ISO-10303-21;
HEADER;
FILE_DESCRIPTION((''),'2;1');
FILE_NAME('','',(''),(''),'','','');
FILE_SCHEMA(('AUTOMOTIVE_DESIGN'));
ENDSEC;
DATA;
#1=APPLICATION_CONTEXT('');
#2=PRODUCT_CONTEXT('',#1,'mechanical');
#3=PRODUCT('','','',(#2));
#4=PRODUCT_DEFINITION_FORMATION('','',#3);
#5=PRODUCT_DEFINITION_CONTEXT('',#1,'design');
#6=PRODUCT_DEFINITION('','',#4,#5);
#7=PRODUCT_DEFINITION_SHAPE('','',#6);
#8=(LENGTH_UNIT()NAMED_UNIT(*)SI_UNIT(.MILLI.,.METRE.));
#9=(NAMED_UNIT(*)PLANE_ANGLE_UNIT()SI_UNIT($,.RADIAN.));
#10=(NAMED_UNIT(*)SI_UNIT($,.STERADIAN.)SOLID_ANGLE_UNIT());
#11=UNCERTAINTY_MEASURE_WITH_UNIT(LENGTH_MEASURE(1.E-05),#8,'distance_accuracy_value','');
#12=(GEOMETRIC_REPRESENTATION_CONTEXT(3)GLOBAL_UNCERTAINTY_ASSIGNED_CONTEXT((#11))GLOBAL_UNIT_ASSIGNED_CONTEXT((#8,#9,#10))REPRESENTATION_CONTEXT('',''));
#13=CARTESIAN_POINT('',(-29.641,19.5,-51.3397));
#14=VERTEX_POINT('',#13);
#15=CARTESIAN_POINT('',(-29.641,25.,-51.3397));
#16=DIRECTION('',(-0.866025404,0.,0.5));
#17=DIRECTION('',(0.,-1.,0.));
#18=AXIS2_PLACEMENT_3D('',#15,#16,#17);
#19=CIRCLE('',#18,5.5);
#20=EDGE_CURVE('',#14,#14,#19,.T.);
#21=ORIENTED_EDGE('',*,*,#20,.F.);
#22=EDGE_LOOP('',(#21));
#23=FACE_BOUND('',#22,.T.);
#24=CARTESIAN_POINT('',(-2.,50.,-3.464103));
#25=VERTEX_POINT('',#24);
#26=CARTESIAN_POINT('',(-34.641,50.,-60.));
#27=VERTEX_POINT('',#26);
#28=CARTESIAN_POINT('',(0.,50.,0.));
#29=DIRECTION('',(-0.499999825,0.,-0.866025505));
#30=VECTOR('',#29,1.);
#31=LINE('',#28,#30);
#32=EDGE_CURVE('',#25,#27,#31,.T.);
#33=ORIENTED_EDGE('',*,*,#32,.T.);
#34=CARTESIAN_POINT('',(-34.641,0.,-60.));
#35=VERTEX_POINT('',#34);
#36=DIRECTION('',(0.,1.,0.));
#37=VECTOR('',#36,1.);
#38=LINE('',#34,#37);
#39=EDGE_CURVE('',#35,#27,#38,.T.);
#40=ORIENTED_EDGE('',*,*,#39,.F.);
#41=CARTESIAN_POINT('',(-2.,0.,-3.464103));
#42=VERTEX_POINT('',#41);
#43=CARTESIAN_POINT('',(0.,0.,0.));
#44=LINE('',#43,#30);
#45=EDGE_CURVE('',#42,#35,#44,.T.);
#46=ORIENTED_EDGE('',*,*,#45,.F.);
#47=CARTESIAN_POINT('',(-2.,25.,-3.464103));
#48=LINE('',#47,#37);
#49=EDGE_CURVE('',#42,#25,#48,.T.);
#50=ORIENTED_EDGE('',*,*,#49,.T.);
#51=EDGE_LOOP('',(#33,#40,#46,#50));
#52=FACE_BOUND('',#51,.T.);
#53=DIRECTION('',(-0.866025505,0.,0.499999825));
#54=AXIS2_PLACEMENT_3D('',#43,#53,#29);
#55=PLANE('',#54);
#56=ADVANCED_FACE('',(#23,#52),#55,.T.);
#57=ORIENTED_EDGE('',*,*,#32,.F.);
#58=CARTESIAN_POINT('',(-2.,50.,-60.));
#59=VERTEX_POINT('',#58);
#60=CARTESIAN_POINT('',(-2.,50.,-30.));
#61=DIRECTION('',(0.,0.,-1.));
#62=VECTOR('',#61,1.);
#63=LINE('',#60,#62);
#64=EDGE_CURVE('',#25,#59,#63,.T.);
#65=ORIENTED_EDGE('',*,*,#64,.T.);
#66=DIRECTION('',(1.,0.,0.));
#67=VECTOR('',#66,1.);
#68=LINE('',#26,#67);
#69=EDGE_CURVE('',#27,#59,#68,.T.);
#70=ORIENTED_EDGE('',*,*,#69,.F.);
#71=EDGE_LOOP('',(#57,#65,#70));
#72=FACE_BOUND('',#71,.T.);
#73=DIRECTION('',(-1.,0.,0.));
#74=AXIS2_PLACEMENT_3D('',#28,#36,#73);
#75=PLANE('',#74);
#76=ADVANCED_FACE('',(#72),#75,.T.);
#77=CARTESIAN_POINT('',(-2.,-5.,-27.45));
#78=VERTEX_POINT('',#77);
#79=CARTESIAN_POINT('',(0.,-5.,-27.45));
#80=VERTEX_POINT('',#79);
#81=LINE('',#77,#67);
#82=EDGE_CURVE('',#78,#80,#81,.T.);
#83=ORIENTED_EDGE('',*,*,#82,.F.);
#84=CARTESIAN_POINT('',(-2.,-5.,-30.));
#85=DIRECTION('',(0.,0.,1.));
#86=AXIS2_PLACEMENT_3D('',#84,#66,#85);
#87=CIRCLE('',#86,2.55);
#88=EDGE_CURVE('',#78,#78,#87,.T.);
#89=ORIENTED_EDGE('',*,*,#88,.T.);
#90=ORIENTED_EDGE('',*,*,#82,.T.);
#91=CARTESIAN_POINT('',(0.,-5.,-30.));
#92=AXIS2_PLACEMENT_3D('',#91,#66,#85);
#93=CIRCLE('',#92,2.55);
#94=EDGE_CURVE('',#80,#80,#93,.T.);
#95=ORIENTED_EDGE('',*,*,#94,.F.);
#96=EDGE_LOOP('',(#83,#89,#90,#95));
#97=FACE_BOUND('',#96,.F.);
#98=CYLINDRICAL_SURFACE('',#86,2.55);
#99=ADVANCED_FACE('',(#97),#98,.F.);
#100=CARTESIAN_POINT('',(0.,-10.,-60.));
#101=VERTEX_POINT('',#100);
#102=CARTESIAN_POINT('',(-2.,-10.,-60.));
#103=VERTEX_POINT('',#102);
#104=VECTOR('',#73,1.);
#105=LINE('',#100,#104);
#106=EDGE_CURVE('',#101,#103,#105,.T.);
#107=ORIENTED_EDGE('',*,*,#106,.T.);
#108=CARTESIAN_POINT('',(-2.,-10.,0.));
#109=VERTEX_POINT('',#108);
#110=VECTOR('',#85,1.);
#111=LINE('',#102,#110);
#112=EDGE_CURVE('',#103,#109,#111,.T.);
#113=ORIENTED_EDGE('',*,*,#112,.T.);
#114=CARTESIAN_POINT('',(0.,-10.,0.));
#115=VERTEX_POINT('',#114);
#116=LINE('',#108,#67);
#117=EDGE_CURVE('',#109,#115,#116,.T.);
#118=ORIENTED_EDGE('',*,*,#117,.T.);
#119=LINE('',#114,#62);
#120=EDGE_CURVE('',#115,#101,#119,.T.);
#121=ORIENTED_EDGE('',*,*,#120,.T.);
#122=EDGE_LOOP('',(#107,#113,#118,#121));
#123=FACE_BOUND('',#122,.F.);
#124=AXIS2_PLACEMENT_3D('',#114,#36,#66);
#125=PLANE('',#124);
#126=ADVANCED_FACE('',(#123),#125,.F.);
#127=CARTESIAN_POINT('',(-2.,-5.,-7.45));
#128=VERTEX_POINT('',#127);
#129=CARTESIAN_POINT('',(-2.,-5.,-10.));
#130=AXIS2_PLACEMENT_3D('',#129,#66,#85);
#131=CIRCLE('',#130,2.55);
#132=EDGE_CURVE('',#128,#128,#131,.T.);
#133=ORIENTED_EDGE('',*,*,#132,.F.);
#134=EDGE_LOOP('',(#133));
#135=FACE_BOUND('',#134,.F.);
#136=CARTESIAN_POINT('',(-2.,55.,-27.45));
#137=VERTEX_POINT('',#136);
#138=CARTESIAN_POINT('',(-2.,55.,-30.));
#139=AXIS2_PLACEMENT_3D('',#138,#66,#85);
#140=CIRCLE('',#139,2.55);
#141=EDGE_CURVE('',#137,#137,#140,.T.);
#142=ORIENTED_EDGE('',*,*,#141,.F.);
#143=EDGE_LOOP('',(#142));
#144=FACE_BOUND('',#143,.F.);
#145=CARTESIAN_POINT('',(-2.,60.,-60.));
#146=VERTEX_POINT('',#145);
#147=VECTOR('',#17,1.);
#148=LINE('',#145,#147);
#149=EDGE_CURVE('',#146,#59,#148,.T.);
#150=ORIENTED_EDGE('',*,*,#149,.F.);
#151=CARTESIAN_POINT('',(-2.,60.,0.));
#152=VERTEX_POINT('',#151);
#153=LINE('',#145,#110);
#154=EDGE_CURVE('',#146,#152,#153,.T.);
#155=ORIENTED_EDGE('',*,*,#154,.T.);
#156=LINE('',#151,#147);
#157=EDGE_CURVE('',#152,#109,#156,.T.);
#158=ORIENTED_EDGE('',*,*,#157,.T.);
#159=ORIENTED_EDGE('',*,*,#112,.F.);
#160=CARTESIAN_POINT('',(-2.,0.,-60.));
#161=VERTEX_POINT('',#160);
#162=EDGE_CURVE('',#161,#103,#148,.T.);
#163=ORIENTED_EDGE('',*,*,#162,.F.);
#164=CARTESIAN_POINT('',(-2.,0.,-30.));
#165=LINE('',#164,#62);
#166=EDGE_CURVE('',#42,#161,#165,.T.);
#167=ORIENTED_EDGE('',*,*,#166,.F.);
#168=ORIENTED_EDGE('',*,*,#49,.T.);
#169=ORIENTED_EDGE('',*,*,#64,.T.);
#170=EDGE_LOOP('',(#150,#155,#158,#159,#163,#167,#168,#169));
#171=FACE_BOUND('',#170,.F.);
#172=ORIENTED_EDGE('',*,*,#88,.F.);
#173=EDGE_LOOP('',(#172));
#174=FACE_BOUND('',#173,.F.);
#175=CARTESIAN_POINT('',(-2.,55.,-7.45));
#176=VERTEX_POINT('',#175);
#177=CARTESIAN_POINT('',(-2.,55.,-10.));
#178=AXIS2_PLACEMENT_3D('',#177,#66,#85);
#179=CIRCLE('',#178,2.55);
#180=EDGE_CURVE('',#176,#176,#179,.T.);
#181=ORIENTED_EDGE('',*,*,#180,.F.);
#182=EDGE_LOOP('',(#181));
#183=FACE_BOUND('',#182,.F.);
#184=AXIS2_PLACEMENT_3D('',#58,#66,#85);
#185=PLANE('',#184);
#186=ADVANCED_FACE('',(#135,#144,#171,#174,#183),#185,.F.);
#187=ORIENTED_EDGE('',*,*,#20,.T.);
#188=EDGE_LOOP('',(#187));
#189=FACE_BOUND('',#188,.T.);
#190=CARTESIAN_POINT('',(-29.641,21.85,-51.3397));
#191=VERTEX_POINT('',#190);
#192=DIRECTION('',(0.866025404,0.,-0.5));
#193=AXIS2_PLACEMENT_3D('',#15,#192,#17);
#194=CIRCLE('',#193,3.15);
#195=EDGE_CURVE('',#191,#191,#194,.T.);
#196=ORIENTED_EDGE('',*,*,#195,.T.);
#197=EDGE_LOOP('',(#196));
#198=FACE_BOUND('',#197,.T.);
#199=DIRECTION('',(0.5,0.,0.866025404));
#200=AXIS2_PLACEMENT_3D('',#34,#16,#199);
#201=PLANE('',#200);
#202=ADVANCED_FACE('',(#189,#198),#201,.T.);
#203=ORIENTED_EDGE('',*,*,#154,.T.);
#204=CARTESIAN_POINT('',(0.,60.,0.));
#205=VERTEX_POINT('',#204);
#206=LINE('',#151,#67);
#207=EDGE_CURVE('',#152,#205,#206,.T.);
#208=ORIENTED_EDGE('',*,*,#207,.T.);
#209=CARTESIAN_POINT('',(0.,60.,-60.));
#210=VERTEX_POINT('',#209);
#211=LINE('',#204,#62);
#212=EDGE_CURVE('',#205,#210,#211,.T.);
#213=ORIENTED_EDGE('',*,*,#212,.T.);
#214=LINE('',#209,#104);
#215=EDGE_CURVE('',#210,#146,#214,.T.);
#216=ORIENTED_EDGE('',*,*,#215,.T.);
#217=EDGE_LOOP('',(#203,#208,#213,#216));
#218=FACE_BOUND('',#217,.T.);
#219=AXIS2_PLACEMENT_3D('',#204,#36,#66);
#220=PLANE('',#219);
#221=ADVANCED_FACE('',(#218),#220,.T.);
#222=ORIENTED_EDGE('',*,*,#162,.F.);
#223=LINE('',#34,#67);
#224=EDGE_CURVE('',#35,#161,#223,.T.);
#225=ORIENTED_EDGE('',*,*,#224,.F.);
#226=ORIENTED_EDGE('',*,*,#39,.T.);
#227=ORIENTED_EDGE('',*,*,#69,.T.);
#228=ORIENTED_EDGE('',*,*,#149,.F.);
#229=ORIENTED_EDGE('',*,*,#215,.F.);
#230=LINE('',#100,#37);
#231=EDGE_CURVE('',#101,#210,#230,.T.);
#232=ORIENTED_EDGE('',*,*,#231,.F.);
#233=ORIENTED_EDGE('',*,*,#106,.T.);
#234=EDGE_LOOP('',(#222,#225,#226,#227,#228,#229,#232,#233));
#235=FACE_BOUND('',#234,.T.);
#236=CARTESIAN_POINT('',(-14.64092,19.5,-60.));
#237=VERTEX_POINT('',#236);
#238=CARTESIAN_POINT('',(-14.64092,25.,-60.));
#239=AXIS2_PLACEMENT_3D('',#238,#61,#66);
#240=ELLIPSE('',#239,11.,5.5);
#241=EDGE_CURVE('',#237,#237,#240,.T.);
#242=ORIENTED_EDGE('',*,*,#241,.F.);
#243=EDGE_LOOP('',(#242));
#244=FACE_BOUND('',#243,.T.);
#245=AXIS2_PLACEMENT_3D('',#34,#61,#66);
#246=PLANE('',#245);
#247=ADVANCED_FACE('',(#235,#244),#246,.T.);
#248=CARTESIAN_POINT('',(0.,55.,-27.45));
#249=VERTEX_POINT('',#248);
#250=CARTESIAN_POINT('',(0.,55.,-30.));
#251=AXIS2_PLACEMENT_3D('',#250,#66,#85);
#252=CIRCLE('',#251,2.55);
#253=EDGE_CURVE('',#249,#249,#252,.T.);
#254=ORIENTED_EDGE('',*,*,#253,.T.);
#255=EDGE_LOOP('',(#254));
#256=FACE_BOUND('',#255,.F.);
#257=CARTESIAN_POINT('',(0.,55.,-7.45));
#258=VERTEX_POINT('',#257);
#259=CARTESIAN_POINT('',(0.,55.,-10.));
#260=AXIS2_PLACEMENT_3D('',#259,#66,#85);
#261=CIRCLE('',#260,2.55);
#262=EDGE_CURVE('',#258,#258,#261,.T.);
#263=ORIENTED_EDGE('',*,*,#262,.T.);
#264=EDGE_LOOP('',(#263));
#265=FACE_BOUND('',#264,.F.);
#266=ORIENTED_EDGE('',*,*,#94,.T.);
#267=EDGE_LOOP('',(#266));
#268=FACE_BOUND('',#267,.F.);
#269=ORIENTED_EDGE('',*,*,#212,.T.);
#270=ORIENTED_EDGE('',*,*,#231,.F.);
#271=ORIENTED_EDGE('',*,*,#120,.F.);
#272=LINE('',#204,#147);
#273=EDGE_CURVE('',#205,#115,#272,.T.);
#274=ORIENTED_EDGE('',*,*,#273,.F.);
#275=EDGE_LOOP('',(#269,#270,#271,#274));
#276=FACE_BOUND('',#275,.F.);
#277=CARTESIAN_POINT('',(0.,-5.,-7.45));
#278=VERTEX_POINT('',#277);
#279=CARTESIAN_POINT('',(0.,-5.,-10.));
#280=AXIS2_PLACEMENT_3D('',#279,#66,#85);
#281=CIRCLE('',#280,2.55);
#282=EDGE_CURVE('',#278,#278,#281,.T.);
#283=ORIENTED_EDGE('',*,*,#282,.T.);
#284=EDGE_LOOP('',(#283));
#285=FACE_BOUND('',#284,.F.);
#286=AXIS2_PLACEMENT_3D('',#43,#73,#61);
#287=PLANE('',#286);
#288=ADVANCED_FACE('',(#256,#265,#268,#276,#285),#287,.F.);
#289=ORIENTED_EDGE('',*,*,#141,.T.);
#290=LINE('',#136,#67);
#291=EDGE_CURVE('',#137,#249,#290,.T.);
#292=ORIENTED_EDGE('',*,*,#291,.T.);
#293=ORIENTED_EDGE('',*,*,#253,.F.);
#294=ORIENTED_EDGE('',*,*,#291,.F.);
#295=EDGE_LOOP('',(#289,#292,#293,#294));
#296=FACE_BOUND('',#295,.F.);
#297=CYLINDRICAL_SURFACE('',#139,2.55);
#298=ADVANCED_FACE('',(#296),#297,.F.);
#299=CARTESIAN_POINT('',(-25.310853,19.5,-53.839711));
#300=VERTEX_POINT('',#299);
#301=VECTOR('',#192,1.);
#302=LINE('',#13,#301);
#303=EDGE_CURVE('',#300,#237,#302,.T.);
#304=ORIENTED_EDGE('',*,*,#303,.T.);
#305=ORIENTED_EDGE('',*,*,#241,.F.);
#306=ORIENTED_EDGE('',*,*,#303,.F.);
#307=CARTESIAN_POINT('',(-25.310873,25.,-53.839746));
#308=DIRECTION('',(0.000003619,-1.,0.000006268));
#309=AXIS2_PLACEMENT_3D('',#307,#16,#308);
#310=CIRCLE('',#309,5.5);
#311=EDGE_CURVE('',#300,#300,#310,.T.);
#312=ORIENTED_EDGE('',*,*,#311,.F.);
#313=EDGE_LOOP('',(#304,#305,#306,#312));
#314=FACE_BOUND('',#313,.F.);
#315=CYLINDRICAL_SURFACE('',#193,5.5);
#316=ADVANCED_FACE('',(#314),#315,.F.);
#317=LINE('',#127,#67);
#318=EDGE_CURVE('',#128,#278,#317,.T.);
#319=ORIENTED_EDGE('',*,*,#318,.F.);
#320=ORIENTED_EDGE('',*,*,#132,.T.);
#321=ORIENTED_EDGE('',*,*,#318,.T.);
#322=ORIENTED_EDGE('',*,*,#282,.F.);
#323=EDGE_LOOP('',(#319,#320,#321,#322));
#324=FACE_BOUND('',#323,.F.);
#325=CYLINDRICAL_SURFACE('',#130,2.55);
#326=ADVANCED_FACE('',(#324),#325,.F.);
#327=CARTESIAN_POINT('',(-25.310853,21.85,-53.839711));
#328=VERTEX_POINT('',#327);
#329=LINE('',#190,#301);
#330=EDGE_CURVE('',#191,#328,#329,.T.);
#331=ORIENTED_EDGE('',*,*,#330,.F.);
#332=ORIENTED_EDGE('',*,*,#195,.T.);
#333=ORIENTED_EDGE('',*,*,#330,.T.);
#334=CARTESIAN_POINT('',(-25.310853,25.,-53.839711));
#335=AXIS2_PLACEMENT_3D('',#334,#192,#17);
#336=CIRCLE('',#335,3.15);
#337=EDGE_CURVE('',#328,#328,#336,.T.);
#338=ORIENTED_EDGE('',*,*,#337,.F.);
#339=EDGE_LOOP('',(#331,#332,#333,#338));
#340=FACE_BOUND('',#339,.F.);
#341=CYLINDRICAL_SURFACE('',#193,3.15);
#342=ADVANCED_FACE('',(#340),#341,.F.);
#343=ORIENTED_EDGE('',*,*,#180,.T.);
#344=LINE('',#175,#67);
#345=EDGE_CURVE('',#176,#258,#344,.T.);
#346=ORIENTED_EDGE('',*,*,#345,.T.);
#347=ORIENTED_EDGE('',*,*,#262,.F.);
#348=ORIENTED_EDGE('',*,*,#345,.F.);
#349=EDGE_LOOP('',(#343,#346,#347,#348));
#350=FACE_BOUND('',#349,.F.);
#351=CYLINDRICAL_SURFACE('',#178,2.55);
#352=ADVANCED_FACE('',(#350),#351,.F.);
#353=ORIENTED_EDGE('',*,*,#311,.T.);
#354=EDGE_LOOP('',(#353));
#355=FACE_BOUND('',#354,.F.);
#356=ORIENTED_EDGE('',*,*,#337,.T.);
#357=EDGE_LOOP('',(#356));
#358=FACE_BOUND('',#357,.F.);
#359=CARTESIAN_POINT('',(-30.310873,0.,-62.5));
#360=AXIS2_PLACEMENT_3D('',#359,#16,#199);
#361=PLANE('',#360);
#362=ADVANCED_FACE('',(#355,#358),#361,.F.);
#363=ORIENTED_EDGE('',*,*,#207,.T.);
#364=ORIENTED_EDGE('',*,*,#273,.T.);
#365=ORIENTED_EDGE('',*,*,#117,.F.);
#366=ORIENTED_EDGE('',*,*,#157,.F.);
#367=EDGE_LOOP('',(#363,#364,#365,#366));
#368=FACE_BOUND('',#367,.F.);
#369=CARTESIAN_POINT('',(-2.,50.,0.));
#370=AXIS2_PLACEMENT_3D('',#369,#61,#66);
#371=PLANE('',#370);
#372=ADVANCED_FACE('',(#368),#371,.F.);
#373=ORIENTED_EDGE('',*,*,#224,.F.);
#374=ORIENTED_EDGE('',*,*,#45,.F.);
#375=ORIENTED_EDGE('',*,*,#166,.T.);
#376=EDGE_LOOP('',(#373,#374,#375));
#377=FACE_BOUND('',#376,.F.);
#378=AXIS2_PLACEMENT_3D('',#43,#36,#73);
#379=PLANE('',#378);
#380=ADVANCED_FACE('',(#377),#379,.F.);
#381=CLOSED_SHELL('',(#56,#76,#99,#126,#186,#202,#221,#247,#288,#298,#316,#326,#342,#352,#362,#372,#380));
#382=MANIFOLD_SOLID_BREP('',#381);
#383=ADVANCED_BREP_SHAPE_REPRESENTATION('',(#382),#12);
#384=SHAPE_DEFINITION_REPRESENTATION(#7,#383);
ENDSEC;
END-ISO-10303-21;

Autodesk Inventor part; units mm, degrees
ref_plane "YZ Plane" through (0, 0, 0) normal (1, 0, 0) x (0, 1, 0)
ref_plane "XZ Plane" through (0, 0, 0) normal (0, 1, 0) x (-1, 0, 0)
ref_plane "XY Plane" through (0, 0, 0) normal (0, 0, 1) x (1, 0, 0)
sketch "スケッチ3" plane through (0, 0, 0) normal (0, 1, 0) x (-1, 0, 0)
  line L0 (0, 0) -> (0, -60)
  line L1 (0, 0) -> (34.641, -60)
  line L2 (0, 0) -> (69.282, 0) construction
  line L3 (34.641, -60) -> (0, -60)
  dimension "d21" = 60
  dimension "d23" = 60
extrude "押し出し2" add sketch "スケッチ3" along normal blind 50
sketch "スケッチ4" plane through (0, 50, 0) normal (0, 1, 0) x (1, 0, 0)
  line L0 (0, 0) -> (0, 60) projected
  line L1 (0, 0) -> (0, 60)
  line L2 (0, 60) -> (-2, 60)
  line L3 (-2, 60) -> (-2, 0)
  line L4 (-2, 0) -> (0, 0)
  dimension "d26" = 2
extrude "押し出し3" add sketch "スケッチ4" along normal blind 10 and the other way blind 60
sketch "スケッチ5" plane through (-34.641, 0, -60) normal (-0.8660254, 0, 0.5) x (0.5, 0, 0.8660254)
  line L0 (65.282, 0) -> (65.282, 50) projected
  line L1 (0, 0) -> (65.282, 0) projected
  line L2 (0, 0) -> (0, 50) projected
  point P0 (69.282, 0)
  point P1 (10, 25)
  dimension "d32" = 25
  dimension "d68" = 10
hole "穴2" at (-29.641, 25, -51.3397) direction (0.8660254, 0, -0.5) diameter 11 end through all
sketch "スケッチ6" plane through (-34.641, 0, -60) normal (-0.8660254, 0, 0.5) x (0.5, 0, 0.8660254)
  point P0 (69.282, 0)
sketch "スケッチ12" plane through (-2, 50, -60) normal (-1, 0, 0) x (0, 0, 1)
  line L0 (60, -60) -> (60, 10) projected
  line L1 (60, -60) -> (0, -60) projected
  point P0 (60, -50)
  point P1 (50, -55)
  point P2 (30, -55)
  point P3 (50, 5)
  point P4 (30, 5)
  dimension "d51" = 10
  dimension "d52" = 5
  dimension "d55" = 20
  dimension "d58" = 60
hole "穴4" at (-2, -5, -10) at (-2, -5, -30) at (-2, 55, -10) at (-2, 55, -30) direction (1, 0, 0) diameter 5.1 end through all
sketch "スケッチ13" plane through (-34.641, 0, -60) normal (-0.8660254, 0, 0.5) x (0.5, 0, 0.8660254)
  circle A0 centre (10, 25) radius 5.5
  line L0 (0, 0) -> (0, 50) projected
  line L1 (0, 0) -> (65.282, 0) projected
  point P0 (69.282, 0)
  dimension "d69" = 11
  dimension "d70" = 10
  dimension "d71" = 25
extrude "押し出し5" add sketch "スケッチ13" against normal blind 5
sketch "スケッチ14" plane through (-34.641, 0, -60) normal (-0.8660254, 0, 0.5) x (0.5, 0, 0.8660254)
  circle A0 centre (10, 25) radius 5.5 projected
  point P0 (69.282, 0)
hole "穴5" at (-29.641, 25, -51.3397) direction (0.8660254, 0, -0.5) diameter 6.3 end through all
properties part number "box3_camera_mount"
